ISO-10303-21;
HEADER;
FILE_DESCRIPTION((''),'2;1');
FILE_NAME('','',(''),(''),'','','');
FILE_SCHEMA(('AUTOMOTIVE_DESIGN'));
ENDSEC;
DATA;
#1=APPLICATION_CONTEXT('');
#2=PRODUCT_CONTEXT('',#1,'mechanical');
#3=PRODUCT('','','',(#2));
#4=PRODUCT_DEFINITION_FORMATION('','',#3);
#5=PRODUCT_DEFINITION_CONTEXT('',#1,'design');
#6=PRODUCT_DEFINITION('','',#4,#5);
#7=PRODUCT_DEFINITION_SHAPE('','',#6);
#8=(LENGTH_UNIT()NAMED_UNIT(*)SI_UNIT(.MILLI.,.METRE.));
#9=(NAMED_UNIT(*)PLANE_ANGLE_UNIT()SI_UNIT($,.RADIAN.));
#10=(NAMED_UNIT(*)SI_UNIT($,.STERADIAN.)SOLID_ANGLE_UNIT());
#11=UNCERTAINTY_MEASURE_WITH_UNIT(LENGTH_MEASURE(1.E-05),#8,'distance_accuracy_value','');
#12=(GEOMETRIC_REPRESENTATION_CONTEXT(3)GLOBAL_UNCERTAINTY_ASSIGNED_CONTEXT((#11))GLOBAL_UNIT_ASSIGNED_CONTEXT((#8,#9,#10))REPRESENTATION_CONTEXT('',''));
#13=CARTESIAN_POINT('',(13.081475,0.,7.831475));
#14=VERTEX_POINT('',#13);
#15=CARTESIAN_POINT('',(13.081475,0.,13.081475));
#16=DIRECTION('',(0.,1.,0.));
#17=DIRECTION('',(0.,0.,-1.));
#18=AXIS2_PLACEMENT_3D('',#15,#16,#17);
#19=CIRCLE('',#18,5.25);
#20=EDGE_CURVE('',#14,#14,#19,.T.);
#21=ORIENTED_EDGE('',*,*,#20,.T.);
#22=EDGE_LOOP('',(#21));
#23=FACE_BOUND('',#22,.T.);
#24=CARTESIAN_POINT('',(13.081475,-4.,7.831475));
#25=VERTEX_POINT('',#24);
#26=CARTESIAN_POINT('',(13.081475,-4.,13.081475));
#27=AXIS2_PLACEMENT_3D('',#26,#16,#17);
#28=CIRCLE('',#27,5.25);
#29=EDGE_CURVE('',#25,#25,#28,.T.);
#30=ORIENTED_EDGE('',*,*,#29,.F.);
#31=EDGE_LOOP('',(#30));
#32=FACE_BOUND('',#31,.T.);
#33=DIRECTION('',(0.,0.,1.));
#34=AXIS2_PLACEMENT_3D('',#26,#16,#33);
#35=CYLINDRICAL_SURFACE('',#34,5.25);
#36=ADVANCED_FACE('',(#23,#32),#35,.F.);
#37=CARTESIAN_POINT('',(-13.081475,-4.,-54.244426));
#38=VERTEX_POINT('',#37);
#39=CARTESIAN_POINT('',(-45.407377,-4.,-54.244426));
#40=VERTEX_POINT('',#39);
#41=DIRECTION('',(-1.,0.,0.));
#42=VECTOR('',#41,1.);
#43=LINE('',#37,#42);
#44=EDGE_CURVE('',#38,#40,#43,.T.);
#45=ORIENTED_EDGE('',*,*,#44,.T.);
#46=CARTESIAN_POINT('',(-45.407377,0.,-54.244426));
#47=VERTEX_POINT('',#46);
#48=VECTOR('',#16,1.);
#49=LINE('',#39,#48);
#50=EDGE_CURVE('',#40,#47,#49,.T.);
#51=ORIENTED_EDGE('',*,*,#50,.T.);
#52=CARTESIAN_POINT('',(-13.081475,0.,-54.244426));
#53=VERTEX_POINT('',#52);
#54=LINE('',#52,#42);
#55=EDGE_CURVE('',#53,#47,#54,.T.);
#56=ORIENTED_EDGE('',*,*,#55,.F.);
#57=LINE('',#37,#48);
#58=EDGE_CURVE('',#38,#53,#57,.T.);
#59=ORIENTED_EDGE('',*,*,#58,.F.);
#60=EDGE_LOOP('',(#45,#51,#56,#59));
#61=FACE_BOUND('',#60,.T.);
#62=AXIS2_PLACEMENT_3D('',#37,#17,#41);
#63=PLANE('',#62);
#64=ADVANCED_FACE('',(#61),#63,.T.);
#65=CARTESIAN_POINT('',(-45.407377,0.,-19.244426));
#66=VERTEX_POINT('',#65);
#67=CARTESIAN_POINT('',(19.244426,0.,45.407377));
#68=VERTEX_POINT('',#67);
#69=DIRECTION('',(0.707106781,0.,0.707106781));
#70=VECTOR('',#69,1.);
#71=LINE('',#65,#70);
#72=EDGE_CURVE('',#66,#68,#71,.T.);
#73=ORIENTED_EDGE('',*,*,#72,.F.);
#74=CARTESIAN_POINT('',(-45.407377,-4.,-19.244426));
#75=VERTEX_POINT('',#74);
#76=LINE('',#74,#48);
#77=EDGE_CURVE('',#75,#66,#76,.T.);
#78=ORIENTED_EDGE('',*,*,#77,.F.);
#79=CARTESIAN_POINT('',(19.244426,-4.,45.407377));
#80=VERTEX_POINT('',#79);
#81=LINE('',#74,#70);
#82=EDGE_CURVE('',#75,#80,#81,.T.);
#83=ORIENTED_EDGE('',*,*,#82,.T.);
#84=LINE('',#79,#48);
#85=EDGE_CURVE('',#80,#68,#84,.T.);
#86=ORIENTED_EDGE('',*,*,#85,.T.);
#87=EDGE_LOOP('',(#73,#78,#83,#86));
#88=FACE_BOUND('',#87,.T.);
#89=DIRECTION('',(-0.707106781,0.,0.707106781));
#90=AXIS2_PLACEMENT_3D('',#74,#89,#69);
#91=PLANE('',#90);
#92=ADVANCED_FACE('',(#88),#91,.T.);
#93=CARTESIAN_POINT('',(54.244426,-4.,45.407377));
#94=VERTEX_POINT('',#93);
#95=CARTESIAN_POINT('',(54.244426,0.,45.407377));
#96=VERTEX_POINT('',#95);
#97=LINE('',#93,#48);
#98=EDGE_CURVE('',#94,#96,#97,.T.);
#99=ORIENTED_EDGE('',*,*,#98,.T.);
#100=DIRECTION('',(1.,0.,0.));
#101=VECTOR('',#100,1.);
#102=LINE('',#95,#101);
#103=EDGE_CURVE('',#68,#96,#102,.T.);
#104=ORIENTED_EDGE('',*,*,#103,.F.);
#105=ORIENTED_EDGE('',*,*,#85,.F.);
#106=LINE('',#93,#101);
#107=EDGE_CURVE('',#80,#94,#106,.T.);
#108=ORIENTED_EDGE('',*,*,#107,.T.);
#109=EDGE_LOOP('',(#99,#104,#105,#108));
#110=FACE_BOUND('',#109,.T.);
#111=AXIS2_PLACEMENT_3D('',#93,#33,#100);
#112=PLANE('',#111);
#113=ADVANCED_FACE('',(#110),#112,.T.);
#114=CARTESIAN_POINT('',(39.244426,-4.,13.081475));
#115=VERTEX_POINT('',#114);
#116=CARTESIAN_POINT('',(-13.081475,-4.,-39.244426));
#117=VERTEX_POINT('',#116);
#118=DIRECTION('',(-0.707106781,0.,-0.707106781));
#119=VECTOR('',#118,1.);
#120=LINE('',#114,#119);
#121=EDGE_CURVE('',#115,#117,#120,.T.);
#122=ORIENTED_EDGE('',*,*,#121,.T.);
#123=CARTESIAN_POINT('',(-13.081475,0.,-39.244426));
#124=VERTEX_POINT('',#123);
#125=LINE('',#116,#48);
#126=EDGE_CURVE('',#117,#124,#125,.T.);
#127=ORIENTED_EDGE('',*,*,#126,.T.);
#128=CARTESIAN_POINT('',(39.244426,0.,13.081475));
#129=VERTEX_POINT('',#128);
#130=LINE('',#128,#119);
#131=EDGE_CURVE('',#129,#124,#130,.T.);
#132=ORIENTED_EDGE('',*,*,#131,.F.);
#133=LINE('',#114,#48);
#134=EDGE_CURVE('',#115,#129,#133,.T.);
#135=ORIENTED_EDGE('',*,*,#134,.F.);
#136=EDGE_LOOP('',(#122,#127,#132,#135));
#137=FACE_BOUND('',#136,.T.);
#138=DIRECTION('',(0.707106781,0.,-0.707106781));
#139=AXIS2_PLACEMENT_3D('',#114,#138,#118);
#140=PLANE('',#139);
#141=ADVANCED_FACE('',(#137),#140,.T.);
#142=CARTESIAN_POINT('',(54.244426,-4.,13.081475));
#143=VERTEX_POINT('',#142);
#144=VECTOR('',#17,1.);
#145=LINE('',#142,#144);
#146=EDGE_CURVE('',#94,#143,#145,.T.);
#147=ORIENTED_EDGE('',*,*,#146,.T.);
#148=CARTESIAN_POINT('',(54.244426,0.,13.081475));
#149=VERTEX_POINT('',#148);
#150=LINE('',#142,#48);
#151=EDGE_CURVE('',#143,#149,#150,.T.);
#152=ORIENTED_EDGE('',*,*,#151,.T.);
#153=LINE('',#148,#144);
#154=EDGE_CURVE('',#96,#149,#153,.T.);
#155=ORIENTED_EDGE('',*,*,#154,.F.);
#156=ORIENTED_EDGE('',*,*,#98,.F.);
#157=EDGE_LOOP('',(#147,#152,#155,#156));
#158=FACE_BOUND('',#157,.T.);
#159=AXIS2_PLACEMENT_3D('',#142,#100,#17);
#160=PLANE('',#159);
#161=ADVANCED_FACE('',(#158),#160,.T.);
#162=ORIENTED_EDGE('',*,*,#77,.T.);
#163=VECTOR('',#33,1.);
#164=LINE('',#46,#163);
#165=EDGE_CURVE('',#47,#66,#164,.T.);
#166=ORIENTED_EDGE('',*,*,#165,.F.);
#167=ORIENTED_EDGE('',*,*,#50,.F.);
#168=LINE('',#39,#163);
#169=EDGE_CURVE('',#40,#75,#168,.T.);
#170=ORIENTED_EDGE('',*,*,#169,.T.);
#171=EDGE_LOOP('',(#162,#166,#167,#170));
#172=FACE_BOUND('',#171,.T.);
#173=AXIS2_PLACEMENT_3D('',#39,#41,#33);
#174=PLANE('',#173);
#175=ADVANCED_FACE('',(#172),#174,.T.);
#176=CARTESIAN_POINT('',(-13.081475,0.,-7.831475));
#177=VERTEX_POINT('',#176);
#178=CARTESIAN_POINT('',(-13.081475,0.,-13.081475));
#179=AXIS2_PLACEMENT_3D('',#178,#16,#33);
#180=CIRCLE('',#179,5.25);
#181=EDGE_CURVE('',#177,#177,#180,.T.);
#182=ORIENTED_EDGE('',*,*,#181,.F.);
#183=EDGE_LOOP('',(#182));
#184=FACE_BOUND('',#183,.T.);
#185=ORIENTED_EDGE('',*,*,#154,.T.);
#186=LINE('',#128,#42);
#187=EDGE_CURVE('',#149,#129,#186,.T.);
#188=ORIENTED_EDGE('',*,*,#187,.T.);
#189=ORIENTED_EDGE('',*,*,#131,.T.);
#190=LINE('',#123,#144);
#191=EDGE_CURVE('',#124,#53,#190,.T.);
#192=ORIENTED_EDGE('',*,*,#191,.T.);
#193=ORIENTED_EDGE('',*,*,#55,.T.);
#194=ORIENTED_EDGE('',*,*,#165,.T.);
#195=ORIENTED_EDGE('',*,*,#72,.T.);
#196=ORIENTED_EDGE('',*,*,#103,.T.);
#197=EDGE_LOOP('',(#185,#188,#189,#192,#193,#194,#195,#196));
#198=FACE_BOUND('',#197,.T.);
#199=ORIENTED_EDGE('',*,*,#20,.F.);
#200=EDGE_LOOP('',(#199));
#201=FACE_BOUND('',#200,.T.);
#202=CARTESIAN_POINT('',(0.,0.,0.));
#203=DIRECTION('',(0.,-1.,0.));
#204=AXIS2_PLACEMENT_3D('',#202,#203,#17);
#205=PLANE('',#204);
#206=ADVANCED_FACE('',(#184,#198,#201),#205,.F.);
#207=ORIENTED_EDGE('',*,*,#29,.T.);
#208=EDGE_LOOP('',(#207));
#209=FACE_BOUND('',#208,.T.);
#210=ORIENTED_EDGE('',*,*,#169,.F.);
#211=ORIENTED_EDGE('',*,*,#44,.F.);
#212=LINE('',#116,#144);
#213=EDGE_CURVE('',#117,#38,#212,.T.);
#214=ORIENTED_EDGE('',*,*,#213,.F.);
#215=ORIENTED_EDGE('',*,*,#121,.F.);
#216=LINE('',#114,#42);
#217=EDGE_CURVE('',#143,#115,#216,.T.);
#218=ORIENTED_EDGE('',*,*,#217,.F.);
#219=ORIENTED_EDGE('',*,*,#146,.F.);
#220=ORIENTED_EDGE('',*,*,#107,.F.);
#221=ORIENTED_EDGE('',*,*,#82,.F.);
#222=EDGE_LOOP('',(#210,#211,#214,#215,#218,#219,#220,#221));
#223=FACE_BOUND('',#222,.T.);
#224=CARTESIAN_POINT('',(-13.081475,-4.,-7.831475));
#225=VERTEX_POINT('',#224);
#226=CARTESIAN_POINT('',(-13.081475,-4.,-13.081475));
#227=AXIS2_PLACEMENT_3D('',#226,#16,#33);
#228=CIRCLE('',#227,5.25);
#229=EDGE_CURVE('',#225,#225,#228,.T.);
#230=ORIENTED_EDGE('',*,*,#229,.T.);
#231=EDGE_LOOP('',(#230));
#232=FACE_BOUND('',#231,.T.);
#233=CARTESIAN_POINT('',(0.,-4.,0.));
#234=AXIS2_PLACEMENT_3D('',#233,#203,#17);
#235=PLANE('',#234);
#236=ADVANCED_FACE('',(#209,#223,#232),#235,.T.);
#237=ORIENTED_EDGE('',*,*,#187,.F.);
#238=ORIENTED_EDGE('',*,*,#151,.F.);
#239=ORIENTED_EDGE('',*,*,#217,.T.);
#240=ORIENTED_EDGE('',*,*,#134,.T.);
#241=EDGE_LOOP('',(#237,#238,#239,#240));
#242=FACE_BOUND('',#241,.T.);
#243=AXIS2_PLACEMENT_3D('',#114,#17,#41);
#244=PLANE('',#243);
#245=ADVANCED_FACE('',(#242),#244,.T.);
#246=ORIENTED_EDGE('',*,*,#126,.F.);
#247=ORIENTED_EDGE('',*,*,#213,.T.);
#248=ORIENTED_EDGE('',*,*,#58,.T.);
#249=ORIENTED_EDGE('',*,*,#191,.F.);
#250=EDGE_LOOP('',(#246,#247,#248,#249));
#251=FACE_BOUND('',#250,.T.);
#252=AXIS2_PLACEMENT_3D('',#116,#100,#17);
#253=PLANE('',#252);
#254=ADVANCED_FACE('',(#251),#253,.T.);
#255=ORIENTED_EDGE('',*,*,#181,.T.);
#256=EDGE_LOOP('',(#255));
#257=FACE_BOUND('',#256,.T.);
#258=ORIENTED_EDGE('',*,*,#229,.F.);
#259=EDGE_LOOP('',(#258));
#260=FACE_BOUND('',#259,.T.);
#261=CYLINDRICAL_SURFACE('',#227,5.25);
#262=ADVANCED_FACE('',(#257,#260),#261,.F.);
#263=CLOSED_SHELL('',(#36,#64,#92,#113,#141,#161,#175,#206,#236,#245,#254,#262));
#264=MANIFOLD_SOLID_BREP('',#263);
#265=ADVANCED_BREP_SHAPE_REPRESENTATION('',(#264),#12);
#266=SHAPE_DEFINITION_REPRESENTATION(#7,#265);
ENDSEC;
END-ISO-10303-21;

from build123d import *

# Parameters (mm, degrees)
SKETCH_1_R             = 5.25
SM_BASE_FLANGE_1_DEPTH = 4


# Sheet-metal steps are written as plain solids
with BuildPart() as part:
    # Sketch 1 → Базовая кромка1 (new body)
    with BuildSketch(Plane(origin=(0, 0, 0), x_dir=(1, 0, 0), z_dir=(0, 1, 0))):
        Polygon((39.244426356, -13.081475452), (-13.081475452, 39.244426356), (-13.081475452, 54.244426356), (-45.40737726, 54.244426356), (-45.40737726, 19.244426356), (19.244426356, -45.40737726), (54.244426356, -45.40737726), (54.244426356, -13.081475452), align=None)
        with Locations(Location((-13.081475452, 13.081475452, 0), (0, 0, 270))):
            Circle(SKETCH_1_R, mode=Mode.SUBTRACT)
        with Locations(Location((13.081475452, -13.081475452, 0), (0, 0, 90))):
            Circle(SKETCH_1_R, mode=Mode.SUBTRACT)
    extrude(amount=-SM_BASE_FLANGE_1_DEPTH)


solid = part.part
